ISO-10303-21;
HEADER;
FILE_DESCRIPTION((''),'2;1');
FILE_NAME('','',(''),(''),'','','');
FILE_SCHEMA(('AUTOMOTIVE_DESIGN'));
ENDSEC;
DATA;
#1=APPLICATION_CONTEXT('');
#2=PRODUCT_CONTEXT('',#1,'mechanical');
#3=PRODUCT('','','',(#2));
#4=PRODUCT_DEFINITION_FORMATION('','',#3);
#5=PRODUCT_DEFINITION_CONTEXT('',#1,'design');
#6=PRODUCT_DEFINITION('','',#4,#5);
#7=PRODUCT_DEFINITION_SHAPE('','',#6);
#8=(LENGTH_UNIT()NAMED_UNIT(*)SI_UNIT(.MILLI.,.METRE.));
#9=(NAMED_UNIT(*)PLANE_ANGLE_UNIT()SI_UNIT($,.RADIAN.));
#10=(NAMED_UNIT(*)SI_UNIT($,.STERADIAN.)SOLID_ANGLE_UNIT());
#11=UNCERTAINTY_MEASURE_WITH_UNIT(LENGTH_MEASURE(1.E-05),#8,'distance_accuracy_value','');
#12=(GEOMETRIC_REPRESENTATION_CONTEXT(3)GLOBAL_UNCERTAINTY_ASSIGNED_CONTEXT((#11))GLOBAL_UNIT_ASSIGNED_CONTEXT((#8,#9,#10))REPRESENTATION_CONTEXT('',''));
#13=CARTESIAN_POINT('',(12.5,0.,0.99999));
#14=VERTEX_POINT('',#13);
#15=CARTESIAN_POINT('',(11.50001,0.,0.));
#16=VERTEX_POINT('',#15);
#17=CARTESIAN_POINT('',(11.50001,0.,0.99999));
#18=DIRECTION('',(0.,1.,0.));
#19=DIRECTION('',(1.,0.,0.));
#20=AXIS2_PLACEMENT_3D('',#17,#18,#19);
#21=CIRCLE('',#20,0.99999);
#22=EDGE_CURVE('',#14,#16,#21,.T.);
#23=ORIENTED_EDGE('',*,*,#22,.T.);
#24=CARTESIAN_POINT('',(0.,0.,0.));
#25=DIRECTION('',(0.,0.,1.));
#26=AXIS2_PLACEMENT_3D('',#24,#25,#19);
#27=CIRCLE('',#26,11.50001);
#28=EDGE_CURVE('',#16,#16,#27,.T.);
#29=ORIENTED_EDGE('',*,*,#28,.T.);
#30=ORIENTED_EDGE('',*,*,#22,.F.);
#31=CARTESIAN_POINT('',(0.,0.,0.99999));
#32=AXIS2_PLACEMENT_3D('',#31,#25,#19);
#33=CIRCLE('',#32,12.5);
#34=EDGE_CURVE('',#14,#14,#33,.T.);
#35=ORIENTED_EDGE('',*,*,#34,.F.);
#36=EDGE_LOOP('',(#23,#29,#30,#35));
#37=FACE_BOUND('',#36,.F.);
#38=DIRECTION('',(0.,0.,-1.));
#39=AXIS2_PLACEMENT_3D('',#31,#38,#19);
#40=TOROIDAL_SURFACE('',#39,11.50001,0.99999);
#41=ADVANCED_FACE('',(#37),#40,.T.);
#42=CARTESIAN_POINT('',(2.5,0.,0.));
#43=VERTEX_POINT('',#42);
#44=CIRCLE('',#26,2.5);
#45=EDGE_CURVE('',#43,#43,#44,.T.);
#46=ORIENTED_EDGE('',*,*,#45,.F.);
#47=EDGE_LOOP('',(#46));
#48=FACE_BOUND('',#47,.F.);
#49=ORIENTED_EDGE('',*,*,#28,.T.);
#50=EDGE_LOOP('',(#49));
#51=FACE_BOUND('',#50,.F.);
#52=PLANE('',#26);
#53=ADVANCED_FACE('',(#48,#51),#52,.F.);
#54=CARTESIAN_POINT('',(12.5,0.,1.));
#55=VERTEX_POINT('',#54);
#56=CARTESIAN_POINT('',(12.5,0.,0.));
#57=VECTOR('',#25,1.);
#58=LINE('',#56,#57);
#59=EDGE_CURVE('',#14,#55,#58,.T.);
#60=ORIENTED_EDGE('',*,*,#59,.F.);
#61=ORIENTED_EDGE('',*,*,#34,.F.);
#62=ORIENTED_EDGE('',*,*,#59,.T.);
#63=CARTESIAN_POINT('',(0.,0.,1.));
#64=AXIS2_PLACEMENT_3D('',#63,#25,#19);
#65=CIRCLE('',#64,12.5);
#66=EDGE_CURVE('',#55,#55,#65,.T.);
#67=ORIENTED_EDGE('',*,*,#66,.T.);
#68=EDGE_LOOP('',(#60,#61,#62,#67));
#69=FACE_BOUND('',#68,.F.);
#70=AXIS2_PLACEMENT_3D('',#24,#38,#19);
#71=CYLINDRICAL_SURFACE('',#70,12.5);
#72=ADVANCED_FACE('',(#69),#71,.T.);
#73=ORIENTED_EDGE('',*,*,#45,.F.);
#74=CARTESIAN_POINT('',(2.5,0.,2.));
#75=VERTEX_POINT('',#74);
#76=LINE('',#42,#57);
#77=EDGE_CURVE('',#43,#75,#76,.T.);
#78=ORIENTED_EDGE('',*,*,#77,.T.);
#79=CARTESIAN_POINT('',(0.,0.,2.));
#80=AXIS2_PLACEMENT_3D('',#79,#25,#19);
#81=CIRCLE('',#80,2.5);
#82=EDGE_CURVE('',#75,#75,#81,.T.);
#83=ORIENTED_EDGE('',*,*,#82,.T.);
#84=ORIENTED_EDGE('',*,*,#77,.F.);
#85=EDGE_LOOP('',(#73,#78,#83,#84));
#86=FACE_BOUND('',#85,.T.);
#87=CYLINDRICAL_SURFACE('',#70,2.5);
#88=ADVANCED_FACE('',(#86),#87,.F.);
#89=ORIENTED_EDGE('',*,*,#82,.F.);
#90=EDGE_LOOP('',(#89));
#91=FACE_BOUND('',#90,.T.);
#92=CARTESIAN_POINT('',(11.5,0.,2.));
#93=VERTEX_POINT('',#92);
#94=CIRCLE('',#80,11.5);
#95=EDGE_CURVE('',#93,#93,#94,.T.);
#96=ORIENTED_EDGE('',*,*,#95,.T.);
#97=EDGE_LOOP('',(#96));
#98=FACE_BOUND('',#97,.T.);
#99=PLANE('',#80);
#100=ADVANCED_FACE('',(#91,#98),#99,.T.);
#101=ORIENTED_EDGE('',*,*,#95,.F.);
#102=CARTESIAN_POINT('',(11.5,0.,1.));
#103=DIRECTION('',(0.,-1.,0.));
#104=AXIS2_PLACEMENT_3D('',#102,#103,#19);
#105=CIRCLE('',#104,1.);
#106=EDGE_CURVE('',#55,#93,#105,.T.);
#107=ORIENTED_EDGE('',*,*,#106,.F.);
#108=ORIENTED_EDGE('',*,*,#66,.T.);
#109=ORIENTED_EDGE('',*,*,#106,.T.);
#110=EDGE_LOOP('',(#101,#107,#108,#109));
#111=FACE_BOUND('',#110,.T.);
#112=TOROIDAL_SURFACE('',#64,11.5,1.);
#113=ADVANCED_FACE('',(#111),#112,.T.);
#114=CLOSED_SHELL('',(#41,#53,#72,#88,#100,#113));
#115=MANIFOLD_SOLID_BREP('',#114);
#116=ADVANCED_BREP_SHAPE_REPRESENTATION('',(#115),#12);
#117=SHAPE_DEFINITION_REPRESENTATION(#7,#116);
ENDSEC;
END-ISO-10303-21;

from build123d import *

# Parameters (mm, degrees)
F0_R     = 12.5
F0_R_2   = 2.5
F1_DEPTH = 2
F2_R     = 1
F3_R     = 0.99999


# Not quite as in the source:
# - a fillet or chamfer is up to 0.001 mm smaller than in the source, because OpenCascade refuses the exact size


with BuildPart() as f1:
    # F0 (on Top) → F1 (new body)
    with BuildSketch(Plane.XY):
        Circle(F0_R)
        Circle(F0_R_2, mode=Mode.SUBTRACT)
    extrude(amount=F1_DEPTH)

    # F2
    f2_edges = [f1.edges().sort_by_distance(p)[0] for p in [
        (-12.5, 0, 2),
    ]]
    fillet(f2_edges, radius=F2_R)

    # F3 (radius 1 in the source; OpenCascade refuses exactly that, so slightly less here)
    f3_edges = [f1.edges().sort_by_distance(p)[0] for p in [
        (-12.5, 0, 0),
    ]]
    fillet(f3_edges, radius=F3_R)


solid = f1.part
